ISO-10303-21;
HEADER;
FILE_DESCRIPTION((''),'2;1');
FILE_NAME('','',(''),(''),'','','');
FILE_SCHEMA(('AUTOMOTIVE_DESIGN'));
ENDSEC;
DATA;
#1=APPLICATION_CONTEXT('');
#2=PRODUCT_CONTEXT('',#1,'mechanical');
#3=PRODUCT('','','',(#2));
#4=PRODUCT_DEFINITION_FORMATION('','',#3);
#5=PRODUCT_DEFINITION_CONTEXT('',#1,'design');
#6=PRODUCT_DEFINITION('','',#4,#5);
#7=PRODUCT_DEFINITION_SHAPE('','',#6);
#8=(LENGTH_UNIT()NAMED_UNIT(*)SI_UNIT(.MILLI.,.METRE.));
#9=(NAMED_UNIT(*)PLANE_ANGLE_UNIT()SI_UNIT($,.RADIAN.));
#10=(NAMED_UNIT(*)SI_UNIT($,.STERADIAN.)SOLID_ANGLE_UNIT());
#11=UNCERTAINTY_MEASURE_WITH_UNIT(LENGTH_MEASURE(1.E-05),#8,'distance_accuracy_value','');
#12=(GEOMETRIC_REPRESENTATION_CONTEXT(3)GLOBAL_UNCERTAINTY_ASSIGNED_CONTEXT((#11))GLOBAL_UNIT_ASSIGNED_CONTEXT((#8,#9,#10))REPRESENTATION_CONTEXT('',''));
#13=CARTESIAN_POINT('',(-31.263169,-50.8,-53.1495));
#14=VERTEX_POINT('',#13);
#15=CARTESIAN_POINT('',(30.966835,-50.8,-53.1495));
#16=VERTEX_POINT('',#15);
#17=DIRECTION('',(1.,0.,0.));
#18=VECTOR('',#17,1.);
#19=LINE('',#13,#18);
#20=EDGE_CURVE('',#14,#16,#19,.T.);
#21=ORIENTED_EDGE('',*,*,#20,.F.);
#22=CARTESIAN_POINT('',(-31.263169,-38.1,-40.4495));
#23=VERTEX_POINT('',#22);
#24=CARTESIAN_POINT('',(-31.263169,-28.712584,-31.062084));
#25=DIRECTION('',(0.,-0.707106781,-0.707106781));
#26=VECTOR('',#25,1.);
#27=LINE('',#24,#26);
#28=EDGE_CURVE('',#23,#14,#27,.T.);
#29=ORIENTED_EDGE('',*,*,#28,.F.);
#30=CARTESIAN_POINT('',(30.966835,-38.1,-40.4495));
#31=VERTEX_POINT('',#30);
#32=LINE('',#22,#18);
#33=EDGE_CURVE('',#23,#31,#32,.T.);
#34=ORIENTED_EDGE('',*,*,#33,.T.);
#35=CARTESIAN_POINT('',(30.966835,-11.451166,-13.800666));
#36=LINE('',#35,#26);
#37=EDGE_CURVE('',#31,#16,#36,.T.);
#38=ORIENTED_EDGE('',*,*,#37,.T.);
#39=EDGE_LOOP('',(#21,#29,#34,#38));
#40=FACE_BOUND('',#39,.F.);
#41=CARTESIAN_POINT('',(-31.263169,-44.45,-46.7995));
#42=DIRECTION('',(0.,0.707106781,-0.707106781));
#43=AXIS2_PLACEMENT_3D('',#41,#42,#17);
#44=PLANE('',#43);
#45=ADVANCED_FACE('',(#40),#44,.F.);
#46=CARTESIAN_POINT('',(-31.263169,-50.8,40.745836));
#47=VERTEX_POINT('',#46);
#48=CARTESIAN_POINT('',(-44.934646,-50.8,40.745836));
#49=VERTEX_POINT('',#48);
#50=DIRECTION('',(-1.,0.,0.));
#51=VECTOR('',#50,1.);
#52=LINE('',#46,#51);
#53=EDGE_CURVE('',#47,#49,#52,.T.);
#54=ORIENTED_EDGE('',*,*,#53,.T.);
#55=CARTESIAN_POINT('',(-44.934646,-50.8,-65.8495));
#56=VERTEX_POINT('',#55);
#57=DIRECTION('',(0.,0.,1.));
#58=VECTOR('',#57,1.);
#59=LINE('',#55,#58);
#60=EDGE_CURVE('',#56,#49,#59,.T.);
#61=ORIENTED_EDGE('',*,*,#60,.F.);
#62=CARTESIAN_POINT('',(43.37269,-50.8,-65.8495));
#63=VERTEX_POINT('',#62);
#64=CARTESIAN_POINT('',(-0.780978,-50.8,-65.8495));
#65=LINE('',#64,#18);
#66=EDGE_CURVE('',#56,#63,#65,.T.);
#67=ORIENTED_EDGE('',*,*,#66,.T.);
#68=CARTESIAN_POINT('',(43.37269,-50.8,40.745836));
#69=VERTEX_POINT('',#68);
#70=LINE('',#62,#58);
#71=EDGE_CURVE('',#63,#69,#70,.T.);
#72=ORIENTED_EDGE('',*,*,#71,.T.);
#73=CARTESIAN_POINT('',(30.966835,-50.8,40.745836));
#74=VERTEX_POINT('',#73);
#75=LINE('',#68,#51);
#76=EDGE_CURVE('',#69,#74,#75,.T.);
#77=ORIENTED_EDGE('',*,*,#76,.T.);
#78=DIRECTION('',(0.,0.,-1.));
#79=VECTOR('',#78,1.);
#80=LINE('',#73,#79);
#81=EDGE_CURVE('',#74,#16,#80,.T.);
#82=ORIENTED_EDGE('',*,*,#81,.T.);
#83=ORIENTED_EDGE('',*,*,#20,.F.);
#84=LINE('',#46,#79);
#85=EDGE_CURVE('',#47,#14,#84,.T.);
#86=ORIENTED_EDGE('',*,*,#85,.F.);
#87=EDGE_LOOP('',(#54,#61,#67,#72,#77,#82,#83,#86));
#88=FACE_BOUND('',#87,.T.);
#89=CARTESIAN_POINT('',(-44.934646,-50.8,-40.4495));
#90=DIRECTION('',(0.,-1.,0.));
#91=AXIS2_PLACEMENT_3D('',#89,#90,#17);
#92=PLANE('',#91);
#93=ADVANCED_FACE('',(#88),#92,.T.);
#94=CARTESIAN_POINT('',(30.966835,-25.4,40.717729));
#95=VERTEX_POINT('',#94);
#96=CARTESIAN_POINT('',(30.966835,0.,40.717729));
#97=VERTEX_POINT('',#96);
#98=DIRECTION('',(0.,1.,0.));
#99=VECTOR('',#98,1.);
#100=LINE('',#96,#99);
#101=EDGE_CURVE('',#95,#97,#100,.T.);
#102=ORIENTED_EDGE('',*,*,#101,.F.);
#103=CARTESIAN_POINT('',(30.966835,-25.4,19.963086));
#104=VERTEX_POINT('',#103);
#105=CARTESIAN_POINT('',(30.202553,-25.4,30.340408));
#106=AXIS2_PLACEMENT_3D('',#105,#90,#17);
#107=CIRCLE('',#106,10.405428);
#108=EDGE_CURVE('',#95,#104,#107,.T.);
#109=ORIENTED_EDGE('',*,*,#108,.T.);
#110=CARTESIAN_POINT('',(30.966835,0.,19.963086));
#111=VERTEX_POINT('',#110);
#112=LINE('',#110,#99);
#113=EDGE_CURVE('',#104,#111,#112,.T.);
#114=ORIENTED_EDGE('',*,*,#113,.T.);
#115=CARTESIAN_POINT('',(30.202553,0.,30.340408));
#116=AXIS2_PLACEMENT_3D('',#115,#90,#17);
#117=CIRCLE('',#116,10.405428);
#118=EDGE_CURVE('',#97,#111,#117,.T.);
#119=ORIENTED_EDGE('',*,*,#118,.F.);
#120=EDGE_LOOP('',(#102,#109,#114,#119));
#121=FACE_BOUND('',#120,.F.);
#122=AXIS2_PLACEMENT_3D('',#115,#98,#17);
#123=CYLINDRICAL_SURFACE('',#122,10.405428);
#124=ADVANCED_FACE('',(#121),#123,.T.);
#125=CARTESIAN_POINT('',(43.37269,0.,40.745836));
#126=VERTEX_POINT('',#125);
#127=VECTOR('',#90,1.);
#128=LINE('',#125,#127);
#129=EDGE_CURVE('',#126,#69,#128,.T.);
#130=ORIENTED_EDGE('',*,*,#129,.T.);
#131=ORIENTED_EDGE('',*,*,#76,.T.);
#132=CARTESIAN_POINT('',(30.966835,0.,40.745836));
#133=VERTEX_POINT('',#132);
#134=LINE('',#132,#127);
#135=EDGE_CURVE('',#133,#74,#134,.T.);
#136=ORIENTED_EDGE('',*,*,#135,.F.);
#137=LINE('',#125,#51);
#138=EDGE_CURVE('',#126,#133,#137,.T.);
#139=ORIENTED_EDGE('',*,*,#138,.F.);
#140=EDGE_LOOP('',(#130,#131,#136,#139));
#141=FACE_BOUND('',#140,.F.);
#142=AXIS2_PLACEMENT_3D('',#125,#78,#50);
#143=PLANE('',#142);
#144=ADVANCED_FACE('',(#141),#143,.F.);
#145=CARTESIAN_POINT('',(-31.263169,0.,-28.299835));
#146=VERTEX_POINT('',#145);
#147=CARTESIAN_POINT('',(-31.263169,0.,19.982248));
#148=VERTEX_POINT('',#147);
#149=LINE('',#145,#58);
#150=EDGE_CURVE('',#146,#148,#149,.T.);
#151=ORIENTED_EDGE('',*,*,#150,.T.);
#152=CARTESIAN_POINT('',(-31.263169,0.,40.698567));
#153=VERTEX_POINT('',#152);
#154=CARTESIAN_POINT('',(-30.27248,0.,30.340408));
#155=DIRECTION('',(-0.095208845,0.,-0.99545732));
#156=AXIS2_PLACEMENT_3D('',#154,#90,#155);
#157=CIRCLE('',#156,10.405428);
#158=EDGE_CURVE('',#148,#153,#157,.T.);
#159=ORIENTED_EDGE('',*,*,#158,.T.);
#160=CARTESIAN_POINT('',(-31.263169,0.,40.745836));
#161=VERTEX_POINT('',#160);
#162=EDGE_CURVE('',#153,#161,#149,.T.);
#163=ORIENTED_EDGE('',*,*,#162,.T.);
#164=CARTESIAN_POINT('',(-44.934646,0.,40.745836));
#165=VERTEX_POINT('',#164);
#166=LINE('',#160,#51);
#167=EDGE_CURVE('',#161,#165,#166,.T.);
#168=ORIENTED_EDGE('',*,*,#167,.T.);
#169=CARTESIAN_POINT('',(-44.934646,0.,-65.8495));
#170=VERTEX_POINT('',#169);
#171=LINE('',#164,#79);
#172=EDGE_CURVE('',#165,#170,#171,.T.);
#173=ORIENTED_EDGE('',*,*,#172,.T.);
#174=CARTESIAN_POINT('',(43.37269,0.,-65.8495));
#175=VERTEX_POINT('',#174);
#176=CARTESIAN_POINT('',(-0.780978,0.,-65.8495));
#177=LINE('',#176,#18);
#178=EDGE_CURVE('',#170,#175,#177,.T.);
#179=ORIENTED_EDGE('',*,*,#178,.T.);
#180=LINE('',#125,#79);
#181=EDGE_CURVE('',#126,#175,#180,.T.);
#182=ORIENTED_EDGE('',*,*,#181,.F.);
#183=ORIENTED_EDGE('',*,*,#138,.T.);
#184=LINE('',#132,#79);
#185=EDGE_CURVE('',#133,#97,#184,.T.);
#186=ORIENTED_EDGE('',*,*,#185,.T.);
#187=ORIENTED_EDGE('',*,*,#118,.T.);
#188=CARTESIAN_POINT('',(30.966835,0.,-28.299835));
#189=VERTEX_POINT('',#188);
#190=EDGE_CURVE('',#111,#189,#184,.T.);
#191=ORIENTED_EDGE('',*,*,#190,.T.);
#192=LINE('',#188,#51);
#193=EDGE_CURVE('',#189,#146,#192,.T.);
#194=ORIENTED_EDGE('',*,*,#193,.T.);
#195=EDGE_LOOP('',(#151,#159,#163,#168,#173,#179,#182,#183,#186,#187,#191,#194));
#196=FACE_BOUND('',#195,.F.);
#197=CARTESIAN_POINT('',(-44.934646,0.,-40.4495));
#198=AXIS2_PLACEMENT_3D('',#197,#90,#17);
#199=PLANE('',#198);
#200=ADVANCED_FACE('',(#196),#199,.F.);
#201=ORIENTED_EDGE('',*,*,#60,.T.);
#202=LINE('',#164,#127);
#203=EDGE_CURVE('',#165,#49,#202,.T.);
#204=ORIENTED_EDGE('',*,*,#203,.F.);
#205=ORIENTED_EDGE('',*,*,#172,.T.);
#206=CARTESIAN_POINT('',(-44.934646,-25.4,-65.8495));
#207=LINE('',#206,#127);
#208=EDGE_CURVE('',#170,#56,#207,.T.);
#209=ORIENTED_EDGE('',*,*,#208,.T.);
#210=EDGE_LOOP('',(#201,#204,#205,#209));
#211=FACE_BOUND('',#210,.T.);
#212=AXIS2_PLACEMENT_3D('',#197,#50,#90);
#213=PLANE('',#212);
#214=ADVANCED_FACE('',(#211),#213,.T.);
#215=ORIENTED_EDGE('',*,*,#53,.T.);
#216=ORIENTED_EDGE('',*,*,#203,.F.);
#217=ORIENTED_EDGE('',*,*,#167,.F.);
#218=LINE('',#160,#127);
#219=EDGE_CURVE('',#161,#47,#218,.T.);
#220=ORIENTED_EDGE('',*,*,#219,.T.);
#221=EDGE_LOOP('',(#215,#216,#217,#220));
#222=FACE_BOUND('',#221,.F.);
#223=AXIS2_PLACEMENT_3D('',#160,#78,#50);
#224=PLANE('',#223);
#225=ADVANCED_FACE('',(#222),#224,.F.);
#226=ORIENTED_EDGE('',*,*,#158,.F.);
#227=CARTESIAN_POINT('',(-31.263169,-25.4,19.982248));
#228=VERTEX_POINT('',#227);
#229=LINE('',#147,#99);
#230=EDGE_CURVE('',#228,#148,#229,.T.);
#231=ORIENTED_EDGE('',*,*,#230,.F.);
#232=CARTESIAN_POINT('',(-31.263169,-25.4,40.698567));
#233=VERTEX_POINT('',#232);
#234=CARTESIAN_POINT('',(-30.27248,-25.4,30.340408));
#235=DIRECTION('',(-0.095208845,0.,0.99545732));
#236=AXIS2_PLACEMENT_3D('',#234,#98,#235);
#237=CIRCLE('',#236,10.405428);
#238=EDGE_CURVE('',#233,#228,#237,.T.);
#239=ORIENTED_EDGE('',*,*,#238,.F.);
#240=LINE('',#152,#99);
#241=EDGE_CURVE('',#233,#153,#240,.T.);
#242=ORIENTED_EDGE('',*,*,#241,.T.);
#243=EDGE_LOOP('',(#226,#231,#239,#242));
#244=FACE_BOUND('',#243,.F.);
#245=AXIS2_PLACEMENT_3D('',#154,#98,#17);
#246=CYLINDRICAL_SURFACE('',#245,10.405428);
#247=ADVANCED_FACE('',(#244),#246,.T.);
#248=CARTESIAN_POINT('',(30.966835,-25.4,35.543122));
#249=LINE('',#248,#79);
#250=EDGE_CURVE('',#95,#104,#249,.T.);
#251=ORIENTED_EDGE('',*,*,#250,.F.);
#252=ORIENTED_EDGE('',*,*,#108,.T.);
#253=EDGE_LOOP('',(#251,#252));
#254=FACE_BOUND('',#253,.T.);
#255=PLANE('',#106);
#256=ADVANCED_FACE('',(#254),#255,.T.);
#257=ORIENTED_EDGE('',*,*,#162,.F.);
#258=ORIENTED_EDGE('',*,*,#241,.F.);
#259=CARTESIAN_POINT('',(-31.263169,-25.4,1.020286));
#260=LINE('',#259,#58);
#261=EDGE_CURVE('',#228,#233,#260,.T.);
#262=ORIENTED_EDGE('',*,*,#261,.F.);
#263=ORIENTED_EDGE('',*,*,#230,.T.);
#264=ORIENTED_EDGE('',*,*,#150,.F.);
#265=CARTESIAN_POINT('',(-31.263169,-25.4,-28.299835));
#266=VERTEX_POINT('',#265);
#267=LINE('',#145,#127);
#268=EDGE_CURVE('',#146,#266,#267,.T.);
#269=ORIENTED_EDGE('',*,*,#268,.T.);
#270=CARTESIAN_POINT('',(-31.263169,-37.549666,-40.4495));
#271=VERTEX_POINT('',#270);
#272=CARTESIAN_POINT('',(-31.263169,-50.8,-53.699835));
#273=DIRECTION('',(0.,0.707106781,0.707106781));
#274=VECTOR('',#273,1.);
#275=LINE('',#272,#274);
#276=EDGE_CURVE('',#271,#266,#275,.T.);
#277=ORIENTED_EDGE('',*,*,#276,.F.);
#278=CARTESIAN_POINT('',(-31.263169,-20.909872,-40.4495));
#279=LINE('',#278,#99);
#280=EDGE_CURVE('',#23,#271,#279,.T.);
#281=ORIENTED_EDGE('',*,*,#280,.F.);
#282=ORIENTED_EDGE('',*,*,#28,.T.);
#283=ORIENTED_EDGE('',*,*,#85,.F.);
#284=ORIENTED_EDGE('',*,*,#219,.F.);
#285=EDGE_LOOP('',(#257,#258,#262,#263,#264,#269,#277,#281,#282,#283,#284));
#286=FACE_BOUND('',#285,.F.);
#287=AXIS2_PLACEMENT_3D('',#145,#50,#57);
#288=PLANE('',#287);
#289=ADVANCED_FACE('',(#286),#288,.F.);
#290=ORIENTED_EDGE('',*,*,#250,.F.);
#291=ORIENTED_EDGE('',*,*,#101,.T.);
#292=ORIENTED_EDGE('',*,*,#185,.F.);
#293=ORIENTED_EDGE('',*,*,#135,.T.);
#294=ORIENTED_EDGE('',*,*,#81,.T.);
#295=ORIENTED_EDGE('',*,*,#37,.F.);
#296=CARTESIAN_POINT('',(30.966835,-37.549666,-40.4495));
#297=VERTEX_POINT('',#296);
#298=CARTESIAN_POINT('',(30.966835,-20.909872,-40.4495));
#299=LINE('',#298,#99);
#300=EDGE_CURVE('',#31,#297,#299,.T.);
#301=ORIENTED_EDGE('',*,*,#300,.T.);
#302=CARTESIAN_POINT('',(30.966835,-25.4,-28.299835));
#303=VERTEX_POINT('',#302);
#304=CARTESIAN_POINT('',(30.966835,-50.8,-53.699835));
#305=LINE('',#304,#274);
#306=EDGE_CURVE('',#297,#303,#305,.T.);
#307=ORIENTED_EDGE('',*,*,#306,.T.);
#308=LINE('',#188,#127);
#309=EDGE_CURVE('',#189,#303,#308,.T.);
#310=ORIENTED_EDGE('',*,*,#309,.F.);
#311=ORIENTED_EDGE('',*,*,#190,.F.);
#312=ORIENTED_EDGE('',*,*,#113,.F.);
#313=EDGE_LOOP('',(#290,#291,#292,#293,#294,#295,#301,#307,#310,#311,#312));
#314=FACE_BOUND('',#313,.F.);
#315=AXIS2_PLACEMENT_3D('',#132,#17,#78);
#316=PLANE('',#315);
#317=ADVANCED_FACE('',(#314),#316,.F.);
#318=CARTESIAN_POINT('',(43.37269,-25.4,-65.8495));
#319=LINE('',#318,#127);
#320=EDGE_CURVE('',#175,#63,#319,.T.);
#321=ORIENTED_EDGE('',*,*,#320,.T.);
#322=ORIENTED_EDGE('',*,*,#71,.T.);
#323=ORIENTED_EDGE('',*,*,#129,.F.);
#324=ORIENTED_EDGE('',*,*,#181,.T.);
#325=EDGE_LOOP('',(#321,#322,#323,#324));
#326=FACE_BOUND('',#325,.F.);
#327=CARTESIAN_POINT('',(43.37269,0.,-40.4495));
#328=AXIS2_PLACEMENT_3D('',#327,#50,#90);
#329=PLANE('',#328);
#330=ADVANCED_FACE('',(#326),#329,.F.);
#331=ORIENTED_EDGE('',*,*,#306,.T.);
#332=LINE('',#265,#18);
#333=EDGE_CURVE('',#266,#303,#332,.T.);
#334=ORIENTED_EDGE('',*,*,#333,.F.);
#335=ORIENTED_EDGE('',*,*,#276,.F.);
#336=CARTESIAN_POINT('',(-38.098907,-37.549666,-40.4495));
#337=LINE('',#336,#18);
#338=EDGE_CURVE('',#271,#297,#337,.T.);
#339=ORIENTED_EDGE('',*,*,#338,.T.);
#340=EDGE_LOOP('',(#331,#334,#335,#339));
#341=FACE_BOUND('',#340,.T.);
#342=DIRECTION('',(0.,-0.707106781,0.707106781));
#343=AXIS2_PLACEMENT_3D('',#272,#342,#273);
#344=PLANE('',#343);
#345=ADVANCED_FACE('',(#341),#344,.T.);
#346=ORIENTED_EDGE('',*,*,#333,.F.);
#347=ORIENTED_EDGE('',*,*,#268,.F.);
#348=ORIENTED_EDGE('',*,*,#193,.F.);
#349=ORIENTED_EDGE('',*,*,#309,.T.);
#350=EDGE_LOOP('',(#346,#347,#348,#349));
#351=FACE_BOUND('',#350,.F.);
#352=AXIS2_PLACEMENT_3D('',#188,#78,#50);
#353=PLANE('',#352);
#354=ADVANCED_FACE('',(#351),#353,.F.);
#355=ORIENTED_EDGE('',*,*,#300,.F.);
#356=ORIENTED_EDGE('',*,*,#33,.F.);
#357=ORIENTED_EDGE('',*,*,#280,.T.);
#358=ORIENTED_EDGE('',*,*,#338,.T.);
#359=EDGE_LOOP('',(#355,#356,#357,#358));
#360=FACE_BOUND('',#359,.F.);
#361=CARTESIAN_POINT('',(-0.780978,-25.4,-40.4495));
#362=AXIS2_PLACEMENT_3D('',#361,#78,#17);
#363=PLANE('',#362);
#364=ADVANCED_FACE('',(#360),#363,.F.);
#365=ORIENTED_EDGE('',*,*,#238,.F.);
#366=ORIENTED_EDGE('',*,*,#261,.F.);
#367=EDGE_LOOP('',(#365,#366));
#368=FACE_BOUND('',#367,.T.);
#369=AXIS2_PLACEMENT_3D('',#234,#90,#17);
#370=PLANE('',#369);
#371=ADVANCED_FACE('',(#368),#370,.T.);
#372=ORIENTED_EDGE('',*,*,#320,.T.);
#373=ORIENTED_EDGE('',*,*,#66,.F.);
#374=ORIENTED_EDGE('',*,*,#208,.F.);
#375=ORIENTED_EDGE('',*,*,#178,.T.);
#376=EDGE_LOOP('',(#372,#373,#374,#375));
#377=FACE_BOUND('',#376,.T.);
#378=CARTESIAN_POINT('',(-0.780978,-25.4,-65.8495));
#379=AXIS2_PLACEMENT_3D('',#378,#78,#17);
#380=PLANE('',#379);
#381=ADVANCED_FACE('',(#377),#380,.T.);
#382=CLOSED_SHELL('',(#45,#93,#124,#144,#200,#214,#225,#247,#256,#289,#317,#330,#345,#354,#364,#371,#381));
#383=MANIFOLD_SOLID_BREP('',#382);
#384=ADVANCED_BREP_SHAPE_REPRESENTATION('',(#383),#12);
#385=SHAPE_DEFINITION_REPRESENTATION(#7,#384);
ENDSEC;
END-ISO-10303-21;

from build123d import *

# Parameters (mm, degrees)
F1_DEPTH    = 50.8
F2_R        = 10.405428205
F3_DEPTH    = 25.4
F4_T1_DEPTH = 62.2300039977
F5_W        = 88.3073359728
F5_H        = 50.8
F6_DEPTH    = 25.4
F7_SIZE     = 12.7


# Not quite as in the source:
# - a fillet or chamfer that OpenCascade refuses, or shapes differently, is made with other operations: its cross-section is extruded or revolved along the edge and cut away or added


with BuildPart() as f1:
    # F0 (on Front) → F1 (new body)
    with BuildSketch(Plane.XZ):
        Polygon((-31.2631689012, 40.7458357513), (-44.9346460508, 40.7458357513), (-44.9346460508, -40.4495000839), (43.372689922, -40.4495000839), (43.372689922, 40.7458357513), (30.9668350965, 40.7458357513), (30.9668350965, -28.2998345792), (-31.2631689012, -28.2998345792), align=None)
    extrude(amount=F1_DEPTH)

    # F2 (on Front) → F3 (join)
    with BuildSketch(Plane.XZ):
        with Locations((-30.2724801004, 30.3404075463)):
            Circle(F2_R)
        with Locations((30.2025526762, 30.3404075463)):
            Circle(F2_R)
    extrude(amount=F3_DEPTH)

    # F4: chamfer of 25.4 on 1 edges, made by hand

    # F4_s2 → F4_t1 (cut)
    with BuildSketch(Plane.YZ.offset(-31.2631689012)):
        Polygon((-50.8, -53.6998345792), (-25.4, -28.2998345792), (-50.8, -28.2998345792), align=None)
    extrude(amount=F4_T1_DEPTH, mode=Mode.SUBTRACT)

    # F5 (on face) → F6 (join)
    with BuildSketch(Plane(origin=(0, 0, -40.4495000839), x_dir=(1, 0, 0), z_dir=(0, 0, -1))):
        with Locations((-0.7809780644, 25.4)):
            Rectangle(F5_W, F5_H)
    extrude(amount=F6_DEPTH)

    # F7
    f7_edges = [f1.edges().sort_by_distance(p)[0] for p in [
        (-0.148167, -50.8, -40.4495),
    ]]
    chamfer(f7_edges, length=F7_SIZE)


solid = f1.part
